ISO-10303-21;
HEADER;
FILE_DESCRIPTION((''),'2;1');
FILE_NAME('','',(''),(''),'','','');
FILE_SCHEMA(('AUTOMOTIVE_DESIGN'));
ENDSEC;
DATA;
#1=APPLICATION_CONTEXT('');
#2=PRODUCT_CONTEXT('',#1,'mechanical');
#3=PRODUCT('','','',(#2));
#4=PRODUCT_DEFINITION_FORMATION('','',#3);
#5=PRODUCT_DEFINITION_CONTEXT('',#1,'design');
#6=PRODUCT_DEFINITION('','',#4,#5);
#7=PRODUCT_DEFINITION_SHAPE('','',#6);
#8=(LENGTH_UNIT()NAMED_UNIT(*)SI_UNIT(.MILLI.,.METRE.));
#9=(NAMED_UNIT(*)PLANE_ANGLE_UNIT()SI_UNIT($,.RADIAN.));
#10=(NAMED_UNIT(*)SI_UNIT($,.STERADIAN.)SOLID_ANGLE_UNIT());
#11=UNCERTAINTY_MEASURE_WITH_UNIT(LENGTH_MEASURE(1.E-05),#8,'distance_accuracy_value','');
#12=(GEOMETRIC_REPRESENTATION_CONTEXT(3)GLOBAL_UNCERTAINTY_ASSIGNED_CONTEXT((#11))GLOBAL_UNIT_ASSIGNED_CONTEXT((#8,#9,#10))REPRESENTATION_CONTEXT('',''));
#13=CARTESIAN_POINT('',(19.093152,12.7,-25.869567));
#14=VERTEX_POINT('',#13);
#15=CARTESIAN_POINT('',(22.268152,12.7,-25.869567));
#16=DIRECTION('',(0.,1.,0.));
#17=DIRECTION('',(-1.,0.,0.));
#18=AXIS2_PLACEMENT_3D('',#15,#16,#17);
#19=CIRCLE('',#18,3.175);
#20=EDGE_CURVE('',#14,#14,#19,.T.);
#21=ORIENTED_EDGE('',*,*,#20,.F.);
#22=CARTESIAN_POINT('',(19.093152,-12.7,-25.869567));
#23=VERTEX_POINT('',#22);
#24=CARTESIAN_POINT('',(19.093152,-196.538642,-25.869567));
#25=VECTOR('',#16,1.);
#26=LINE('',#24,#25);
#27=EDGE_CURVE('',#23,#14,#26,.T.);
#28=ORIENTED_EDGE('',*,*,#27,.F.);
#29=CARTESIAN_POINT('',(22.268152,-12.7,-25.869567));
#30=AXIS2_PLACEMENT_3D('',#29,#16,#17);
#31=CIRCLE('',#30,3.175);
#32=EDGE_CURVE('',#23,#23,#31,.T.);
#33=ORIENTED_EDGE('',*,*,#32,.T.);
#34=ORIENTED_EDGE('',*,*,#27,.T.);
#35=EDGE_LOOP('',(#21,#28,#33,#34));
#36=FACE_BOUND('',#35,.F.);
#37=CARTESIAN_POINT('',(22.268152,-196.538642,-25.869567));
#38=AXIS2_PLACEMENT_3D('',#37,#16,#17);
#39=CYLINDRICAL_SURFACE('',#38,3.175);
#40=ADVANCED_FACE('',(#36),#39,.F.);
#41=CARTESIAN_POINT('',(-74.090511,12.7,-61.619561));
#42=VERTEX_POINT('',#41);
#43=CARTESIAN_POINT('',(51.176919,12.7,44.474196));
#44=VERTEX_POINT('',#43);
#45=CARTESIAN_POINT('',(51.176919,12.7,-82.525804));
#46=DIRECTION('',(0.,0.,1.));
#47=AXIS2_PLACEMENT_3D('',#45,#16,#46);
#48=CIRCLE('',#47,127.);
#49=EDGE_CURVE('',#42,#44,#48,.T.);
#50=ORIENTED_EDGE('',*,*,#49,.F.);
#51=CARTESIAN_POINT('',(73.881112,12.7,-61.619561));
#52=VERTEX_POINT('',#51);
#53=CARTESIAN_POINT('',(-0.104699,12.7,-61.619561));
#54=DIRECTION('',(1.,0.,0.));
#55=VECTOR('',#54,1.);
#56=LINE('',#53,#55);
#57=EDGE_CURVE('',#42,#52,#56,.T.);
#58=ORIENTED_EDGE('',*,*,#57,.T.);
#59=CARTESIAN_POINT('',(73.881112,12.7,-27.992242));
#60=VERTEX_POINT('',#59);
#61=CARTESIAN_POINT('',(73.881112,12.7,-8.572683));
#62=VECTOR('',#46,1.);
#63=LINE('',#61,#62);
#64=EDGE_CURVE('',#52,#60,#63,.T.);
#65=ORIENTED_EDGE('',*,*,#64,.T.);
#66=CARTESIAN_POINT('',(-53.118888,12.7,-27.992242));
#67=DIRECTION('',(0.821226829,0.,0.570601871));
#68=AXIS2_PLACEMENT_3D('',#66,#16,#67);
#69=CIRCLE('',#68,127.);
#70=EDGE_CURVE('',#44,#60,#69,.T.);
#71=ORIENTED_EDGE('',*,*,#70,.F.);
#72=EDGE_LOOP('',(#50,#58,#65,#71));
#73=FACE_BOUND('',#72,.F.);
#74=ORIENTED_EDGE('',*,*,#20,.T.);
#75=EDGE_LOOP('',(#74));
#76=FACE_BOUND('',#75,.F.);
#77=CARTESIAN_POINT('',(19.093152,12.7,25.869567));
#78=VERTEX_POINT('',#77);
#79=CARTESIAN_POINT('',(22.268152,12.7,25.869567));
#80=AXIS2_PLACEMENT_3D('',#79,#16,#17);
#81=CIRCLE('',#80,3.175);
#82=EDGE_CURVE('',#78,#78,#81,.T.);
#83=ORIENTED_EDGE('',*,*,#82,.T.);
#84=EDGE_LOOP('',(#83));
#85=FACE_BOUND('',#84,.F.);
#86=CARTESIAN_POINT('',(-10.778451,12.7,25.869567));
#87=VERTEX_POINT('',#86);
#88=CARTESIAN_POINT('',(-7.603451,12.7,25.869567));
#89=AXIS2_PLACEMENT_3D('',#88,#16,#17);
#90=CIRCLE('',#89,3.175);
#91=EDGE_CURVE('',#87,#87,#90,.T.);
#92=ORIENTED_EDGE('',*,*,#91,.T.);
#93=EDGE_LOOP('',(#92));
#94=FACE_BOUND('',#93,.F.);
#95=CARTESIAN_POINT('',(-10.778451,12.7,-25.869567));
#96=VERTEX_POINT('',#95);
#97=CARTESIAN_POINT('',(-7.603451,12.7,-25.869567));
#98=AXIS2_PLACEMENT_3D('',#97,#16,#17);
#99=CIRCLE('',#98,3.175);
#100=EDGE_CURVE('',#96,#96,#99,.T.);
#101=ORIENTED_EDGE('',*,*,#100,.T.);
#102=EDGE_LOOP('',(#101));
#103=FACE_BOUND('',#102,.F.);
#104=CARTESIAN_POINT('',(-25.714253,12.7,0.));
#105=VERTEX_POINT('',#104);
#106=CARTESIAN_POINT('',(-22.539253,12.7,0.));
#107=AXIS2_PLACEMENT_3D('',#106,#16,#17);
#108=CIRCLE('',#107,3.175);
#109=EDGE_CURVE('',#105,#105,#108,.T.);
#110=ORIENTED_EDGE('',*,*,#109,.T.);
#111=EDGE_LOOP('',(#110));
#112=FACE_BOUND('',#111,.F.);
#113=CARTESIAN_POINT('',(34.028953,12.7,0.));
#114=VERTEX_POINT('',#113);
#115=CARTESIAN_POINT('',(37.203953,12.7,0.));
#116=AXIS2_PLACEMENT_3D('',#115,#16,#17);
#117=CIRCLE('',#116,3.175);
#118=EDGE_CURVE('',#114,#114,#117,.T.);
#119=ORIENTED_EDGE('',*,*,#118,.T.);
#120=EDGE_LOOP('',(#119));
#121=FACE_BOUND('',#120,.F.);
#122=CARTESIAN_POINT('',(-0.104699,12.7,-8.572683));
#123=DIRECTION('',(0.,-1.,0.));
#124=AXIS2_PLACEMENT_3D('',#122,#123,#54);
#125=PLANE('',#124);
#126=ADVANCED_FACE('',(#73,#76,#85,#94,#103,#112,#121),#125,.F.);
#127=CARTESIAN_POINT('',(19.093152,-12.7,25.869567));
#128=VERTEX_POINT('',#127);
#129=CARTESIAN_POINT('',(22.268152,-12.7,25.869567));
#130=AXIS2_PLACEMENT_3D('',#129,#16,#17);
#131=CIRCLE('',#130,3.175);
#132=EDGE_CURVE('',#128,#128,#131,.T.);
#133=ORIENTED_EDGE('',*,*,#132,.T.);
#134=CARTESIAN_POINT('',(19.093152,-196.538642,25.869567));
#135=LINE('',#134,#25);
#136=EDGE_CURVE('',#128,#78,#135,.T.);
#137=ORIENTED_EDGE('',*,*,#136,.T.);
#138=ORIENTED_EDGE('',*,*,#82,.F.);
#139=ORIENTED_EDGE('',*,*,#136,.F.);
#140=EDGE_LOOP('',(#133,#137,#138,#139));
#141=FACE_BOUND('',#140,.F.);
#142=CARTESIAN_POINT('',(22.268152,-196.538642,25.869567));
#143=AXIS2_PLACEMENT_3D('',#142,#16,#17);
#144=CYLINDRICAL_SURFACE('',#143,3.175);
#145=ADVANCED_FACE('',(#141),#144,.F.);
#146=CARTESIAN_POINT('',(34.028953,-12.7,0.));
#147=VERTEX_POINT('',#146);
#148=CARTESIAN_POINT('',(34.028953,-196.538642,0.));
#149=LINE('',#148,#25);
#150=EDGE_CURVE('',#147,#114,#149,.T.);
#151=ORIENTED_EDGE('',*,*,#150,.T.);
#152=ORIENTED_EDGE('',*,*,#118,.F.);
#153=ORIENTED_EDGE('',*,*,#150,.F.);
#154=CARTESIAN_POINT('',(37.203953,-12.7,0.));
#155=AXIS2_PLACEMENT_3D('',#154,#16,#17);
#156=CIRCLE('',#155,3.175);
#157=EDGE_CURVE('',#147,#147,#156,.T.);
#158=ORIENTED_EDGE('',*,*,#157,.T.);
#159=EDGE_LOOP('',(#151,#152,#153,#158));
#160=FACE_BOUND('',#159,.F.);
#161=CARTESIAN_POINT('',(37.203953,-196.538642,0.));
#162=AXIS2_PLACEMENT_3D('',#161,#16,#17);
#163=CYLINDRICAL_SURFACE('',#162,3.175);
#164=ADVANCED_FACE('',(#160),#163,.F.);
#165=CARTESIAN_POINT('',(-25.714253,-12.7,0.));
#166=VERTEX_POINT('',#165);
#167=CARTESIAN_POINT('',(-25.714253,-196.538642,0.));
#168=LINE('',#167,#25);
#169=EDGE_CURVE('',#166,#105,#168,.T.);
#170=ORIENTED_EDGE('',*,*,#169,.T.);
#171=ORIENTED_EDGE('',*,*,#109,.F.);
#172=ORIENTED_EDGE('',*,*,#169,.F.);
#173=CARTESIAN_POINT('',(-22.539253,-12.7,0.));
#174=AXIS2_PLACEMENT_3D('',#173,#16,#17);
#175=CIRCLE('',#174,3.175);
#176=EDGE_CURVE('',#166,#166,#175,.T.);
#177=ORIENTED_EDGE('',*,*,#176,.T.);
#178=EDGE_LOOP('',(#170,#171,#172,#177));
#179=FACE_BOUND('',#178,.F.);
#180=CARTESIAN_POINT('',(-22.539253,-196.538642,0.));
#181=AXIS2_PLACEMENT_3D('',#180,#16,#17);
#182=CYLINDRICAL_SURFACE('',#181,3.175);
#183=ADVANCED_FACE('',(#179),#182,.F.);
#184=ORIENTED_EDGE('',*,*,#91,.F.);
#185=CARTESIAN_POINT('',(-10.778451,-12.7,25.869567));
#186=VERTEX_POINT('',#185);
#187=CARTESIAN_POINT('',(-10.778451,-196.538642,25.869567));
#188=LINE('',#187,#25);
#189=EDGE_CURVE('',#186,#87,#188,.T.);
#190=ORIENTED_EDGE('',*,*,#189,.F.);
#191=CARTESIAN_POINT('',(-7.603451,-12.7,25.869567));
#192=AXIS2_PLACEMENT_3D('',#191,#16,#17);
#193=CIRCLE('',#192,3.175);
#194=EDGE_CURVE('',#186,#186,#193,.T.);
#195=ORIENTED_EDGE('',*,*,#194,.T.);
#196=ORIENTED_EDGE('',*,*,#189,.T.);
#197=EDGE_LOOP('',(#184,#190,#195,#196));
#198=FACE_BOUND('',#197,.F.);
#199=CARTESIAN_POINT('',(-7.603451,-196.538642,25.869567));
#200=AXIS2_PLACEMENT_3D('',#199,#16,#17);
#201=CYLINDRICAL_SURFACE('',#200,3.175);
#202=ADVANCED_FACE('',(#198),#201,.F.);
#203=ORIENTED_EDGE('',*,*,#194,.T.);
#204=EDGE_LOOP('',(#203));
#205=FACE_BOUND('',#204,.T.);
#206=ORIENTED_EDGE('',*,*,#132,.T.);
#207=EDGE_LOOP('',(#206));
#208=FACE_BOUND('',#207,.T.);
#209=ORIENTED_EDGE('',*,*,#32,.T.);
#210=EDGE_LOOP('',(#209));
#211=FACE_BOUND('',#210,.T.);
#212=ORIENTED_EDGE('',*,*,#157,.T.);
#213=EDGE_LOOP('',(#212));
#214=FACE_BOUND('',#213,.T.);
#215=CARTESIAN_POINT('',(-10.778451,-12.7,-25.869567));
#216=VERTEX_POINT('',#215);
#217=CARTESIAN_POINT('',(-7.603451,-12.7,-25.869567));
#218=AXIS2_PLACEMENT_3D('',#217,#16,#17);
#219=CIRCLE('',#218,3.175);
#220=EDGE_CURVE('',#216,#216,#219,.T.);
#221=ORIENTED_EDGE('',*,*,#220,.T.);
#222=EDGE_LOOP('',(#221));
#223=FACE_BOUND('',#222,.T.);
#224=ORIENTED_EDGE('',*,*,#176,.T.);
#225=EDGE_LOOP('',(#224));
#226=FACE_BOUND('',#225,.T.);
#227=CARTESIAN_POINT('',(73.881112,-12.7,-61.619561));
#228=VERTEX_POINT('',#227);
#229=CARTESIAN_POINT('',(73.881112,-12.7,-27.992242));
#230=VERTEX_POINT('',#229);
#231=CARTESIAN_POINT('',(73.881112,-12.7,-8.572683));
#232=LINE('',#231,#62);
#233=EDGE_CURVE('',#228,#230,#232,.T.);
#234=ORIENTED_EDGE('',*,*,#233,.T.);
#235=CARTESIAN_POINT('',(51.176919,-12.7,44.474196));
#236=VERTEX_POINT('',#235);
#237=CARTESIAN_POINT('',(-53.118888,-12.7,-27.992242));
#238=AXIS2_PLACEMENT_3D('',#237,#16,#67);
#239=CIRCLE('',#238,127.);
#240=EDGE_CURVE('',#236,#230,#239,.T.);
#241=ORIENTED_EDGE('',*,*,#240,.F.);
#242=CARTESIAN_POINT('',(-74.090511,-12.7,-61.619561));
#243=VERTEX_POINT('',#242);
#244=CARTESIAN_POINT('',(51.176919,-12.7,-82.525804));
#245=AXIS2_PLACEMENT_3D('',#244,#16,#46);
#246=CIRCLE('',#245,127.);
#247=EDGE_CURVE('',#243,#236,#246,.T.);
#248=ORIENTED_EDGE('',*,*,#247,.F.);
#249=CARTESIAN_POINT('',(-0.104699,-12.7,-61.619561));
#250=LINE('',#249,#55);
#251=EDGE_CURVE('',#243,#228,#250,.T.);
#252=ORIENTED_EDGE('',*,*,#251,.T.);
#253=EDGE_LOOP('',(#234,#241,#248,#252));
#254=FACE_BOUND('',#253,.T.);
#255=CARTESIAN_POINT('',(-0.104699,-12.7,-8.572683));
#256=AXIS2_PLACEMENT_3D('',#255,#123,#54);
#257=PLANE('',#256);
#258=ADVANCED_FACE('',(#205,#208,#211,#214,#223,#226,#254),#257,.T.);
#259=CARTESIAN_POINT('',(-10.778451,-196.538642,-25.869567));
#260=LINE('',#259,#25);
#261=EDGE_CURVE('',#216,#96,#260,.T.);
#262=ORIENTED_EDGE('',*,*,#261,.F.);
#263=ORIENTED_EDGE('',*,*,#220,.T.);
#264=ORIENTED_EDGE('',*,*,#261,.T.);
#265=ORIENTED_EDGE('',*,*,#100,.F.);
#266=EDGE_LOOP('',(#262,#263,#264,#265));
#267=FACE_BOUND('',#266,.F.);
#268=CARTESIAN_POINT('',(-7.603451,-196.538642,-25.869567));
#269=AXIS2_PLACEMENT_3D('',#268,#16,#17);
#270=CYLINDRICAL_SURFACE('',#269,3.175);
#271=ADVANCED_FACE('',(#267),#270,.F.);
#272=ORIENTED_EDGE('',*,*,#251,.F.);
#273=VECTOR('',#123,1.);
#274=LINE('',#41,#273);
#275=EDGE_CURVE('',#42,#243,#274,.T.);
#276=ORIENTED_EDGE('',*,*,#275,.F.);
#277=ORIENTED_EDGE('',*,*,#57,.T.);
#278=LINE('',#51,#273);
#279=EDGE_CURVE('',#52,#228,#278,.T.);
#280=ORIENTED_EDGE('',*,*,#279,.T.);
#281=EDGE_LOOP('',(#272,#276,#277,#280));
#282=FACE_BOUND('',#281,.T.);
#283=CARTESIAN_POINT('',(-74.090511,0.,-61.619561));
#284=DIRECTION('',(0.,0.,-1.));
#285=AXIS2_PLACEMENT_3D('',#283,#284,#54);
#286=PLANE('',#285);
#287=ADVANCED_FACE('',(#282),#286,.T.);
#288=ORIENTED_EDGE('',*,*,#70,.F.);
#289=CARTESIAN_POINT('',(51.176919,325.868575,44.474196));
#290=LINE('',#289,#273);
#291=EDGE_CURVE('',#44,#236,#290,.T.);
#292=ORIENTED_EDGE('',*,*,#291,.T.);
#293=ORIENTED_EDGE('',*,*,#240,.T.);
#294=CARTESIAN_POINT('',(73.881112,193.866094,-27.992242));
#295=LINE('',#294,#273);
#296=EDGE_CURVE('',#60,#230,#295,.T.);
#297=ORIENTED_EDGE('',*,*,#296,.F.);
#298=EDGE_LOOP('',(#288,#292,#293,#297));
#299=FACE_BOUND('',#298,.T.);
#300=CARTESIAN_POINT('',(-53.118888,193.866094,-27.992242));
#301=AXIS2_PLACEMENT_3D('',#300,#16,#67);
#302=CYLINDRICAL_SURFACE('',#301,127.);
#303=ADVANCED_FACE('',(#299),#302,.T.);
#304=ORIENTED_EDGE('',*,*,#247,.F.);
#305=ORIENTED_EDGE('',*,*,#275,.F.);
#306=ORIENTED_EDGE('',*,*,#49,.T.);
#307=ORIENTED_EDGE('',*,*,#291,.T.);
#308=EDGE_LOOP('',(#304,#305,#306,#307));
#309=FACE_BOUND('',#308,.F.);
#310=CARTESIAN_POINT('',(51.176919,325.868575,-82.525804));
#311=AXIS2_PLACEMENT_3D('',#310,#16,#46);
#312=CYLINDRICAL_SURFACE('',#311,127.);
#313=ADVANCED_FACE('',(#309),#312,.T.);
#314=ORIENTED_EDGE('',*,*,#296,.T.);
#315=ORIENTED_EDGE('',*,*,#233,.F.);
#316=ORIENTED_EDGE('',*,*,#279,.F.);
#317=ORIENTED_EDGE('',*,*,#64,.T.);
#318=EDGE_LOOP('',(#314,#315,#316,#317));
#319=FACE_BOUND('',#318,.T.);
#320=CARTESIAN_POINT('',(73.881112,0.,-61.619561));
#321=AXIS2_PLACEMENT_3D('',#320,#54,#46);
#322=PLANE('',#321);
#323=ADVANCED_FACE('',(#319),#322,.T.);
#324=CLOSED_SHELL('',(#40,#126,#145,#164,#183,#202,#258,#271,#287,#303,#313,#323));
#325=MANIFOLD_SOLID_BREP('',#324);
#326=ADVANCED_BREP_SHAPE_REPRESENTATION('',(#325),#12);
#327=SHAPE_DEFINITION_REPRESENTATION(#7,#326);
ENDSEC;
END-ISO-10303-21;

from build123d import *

# Parameters (mm, degrees)
F0_W        = 147.9716226459
F0_H        = 106.0937568545
F1_DEPTH    = 12.7
F2_T1_DEPTH = 651.7371495757
F3_T1_DEPTH = 387.7321882623
F5_D        = 6.35


# Not quite as in the source:
# - a fillet or chamfer that OpenCascade refuses, or shapes differently, is made with other operations: its cross-section is extruded or revolved along the edge and cut away or added


with BuildPart() as f1:
    # F0 (on Front) → F1 (new body, symmetric)
    with BuildSketch(Plane.XZ):
        with Locations((-0.1046992838, -8.5726827383)):
            Rectangle(F0_W, F0_H)
    extrude(amount=F1_DEPTH, both=True)

    # F2: fillet of radius 127 on 1 edges, made by hand

    # F2_s2 → F2_t1 (cut)
    with BuildSketch(Plane.XZ.offset(-325.8685747878)):
        with BuildLine():
            ThreePointArc((51.1769193084, 44.474195689), (-30.9020278112, 14.386766802), (-74.0905106068, -61.6195611656))
            Line((-74.0905106068, -61.6195611656), (-74.0905106068, 44.474195689))
            Line((-74.0905106068, 44.474195689), (51.1769193084, 44.474195689))
        make_face()
    extrude(amount=F2_T1_DEPTH, mode=Mode.SUBTRACT)

    # F3: fillet of radius 127 on 1 edges, made by hand

    # F3_s2 → F3_t1 (cut)
    with BuildSketch(Plane.XZ.offset(-193.8660941311)):
        with BuildLine():
            ThreePointArc((51.1769193084, 44.474195689), (68.0722163397, 9.9776966511), (73.8811120391, -27.9922419635))
            Line((73.8811120391, -27.9922419635), (73.8811120391, 44.474195689))
            Line((73.8811120391, 44.474195689), (51.1769193084, 44.474195689))
        make_face()
    extrude(amount=F3_T1_DEPTH, mode=Mode.SUBTRACT)

    # F5 (through all)
    with Locations(Plane.XZ.offset(12.7)):
        with Locations((-7.6034513134, -25.8695669472), (-22.5392527542, 0), (-7.6034513134, 25.8695669472), (22.2681515682, 25.8695669472), (37.203953009, 0), (22.2681515682, -25.8695669472)):
            Hole(F5_D / 2)


solid = f1.part
